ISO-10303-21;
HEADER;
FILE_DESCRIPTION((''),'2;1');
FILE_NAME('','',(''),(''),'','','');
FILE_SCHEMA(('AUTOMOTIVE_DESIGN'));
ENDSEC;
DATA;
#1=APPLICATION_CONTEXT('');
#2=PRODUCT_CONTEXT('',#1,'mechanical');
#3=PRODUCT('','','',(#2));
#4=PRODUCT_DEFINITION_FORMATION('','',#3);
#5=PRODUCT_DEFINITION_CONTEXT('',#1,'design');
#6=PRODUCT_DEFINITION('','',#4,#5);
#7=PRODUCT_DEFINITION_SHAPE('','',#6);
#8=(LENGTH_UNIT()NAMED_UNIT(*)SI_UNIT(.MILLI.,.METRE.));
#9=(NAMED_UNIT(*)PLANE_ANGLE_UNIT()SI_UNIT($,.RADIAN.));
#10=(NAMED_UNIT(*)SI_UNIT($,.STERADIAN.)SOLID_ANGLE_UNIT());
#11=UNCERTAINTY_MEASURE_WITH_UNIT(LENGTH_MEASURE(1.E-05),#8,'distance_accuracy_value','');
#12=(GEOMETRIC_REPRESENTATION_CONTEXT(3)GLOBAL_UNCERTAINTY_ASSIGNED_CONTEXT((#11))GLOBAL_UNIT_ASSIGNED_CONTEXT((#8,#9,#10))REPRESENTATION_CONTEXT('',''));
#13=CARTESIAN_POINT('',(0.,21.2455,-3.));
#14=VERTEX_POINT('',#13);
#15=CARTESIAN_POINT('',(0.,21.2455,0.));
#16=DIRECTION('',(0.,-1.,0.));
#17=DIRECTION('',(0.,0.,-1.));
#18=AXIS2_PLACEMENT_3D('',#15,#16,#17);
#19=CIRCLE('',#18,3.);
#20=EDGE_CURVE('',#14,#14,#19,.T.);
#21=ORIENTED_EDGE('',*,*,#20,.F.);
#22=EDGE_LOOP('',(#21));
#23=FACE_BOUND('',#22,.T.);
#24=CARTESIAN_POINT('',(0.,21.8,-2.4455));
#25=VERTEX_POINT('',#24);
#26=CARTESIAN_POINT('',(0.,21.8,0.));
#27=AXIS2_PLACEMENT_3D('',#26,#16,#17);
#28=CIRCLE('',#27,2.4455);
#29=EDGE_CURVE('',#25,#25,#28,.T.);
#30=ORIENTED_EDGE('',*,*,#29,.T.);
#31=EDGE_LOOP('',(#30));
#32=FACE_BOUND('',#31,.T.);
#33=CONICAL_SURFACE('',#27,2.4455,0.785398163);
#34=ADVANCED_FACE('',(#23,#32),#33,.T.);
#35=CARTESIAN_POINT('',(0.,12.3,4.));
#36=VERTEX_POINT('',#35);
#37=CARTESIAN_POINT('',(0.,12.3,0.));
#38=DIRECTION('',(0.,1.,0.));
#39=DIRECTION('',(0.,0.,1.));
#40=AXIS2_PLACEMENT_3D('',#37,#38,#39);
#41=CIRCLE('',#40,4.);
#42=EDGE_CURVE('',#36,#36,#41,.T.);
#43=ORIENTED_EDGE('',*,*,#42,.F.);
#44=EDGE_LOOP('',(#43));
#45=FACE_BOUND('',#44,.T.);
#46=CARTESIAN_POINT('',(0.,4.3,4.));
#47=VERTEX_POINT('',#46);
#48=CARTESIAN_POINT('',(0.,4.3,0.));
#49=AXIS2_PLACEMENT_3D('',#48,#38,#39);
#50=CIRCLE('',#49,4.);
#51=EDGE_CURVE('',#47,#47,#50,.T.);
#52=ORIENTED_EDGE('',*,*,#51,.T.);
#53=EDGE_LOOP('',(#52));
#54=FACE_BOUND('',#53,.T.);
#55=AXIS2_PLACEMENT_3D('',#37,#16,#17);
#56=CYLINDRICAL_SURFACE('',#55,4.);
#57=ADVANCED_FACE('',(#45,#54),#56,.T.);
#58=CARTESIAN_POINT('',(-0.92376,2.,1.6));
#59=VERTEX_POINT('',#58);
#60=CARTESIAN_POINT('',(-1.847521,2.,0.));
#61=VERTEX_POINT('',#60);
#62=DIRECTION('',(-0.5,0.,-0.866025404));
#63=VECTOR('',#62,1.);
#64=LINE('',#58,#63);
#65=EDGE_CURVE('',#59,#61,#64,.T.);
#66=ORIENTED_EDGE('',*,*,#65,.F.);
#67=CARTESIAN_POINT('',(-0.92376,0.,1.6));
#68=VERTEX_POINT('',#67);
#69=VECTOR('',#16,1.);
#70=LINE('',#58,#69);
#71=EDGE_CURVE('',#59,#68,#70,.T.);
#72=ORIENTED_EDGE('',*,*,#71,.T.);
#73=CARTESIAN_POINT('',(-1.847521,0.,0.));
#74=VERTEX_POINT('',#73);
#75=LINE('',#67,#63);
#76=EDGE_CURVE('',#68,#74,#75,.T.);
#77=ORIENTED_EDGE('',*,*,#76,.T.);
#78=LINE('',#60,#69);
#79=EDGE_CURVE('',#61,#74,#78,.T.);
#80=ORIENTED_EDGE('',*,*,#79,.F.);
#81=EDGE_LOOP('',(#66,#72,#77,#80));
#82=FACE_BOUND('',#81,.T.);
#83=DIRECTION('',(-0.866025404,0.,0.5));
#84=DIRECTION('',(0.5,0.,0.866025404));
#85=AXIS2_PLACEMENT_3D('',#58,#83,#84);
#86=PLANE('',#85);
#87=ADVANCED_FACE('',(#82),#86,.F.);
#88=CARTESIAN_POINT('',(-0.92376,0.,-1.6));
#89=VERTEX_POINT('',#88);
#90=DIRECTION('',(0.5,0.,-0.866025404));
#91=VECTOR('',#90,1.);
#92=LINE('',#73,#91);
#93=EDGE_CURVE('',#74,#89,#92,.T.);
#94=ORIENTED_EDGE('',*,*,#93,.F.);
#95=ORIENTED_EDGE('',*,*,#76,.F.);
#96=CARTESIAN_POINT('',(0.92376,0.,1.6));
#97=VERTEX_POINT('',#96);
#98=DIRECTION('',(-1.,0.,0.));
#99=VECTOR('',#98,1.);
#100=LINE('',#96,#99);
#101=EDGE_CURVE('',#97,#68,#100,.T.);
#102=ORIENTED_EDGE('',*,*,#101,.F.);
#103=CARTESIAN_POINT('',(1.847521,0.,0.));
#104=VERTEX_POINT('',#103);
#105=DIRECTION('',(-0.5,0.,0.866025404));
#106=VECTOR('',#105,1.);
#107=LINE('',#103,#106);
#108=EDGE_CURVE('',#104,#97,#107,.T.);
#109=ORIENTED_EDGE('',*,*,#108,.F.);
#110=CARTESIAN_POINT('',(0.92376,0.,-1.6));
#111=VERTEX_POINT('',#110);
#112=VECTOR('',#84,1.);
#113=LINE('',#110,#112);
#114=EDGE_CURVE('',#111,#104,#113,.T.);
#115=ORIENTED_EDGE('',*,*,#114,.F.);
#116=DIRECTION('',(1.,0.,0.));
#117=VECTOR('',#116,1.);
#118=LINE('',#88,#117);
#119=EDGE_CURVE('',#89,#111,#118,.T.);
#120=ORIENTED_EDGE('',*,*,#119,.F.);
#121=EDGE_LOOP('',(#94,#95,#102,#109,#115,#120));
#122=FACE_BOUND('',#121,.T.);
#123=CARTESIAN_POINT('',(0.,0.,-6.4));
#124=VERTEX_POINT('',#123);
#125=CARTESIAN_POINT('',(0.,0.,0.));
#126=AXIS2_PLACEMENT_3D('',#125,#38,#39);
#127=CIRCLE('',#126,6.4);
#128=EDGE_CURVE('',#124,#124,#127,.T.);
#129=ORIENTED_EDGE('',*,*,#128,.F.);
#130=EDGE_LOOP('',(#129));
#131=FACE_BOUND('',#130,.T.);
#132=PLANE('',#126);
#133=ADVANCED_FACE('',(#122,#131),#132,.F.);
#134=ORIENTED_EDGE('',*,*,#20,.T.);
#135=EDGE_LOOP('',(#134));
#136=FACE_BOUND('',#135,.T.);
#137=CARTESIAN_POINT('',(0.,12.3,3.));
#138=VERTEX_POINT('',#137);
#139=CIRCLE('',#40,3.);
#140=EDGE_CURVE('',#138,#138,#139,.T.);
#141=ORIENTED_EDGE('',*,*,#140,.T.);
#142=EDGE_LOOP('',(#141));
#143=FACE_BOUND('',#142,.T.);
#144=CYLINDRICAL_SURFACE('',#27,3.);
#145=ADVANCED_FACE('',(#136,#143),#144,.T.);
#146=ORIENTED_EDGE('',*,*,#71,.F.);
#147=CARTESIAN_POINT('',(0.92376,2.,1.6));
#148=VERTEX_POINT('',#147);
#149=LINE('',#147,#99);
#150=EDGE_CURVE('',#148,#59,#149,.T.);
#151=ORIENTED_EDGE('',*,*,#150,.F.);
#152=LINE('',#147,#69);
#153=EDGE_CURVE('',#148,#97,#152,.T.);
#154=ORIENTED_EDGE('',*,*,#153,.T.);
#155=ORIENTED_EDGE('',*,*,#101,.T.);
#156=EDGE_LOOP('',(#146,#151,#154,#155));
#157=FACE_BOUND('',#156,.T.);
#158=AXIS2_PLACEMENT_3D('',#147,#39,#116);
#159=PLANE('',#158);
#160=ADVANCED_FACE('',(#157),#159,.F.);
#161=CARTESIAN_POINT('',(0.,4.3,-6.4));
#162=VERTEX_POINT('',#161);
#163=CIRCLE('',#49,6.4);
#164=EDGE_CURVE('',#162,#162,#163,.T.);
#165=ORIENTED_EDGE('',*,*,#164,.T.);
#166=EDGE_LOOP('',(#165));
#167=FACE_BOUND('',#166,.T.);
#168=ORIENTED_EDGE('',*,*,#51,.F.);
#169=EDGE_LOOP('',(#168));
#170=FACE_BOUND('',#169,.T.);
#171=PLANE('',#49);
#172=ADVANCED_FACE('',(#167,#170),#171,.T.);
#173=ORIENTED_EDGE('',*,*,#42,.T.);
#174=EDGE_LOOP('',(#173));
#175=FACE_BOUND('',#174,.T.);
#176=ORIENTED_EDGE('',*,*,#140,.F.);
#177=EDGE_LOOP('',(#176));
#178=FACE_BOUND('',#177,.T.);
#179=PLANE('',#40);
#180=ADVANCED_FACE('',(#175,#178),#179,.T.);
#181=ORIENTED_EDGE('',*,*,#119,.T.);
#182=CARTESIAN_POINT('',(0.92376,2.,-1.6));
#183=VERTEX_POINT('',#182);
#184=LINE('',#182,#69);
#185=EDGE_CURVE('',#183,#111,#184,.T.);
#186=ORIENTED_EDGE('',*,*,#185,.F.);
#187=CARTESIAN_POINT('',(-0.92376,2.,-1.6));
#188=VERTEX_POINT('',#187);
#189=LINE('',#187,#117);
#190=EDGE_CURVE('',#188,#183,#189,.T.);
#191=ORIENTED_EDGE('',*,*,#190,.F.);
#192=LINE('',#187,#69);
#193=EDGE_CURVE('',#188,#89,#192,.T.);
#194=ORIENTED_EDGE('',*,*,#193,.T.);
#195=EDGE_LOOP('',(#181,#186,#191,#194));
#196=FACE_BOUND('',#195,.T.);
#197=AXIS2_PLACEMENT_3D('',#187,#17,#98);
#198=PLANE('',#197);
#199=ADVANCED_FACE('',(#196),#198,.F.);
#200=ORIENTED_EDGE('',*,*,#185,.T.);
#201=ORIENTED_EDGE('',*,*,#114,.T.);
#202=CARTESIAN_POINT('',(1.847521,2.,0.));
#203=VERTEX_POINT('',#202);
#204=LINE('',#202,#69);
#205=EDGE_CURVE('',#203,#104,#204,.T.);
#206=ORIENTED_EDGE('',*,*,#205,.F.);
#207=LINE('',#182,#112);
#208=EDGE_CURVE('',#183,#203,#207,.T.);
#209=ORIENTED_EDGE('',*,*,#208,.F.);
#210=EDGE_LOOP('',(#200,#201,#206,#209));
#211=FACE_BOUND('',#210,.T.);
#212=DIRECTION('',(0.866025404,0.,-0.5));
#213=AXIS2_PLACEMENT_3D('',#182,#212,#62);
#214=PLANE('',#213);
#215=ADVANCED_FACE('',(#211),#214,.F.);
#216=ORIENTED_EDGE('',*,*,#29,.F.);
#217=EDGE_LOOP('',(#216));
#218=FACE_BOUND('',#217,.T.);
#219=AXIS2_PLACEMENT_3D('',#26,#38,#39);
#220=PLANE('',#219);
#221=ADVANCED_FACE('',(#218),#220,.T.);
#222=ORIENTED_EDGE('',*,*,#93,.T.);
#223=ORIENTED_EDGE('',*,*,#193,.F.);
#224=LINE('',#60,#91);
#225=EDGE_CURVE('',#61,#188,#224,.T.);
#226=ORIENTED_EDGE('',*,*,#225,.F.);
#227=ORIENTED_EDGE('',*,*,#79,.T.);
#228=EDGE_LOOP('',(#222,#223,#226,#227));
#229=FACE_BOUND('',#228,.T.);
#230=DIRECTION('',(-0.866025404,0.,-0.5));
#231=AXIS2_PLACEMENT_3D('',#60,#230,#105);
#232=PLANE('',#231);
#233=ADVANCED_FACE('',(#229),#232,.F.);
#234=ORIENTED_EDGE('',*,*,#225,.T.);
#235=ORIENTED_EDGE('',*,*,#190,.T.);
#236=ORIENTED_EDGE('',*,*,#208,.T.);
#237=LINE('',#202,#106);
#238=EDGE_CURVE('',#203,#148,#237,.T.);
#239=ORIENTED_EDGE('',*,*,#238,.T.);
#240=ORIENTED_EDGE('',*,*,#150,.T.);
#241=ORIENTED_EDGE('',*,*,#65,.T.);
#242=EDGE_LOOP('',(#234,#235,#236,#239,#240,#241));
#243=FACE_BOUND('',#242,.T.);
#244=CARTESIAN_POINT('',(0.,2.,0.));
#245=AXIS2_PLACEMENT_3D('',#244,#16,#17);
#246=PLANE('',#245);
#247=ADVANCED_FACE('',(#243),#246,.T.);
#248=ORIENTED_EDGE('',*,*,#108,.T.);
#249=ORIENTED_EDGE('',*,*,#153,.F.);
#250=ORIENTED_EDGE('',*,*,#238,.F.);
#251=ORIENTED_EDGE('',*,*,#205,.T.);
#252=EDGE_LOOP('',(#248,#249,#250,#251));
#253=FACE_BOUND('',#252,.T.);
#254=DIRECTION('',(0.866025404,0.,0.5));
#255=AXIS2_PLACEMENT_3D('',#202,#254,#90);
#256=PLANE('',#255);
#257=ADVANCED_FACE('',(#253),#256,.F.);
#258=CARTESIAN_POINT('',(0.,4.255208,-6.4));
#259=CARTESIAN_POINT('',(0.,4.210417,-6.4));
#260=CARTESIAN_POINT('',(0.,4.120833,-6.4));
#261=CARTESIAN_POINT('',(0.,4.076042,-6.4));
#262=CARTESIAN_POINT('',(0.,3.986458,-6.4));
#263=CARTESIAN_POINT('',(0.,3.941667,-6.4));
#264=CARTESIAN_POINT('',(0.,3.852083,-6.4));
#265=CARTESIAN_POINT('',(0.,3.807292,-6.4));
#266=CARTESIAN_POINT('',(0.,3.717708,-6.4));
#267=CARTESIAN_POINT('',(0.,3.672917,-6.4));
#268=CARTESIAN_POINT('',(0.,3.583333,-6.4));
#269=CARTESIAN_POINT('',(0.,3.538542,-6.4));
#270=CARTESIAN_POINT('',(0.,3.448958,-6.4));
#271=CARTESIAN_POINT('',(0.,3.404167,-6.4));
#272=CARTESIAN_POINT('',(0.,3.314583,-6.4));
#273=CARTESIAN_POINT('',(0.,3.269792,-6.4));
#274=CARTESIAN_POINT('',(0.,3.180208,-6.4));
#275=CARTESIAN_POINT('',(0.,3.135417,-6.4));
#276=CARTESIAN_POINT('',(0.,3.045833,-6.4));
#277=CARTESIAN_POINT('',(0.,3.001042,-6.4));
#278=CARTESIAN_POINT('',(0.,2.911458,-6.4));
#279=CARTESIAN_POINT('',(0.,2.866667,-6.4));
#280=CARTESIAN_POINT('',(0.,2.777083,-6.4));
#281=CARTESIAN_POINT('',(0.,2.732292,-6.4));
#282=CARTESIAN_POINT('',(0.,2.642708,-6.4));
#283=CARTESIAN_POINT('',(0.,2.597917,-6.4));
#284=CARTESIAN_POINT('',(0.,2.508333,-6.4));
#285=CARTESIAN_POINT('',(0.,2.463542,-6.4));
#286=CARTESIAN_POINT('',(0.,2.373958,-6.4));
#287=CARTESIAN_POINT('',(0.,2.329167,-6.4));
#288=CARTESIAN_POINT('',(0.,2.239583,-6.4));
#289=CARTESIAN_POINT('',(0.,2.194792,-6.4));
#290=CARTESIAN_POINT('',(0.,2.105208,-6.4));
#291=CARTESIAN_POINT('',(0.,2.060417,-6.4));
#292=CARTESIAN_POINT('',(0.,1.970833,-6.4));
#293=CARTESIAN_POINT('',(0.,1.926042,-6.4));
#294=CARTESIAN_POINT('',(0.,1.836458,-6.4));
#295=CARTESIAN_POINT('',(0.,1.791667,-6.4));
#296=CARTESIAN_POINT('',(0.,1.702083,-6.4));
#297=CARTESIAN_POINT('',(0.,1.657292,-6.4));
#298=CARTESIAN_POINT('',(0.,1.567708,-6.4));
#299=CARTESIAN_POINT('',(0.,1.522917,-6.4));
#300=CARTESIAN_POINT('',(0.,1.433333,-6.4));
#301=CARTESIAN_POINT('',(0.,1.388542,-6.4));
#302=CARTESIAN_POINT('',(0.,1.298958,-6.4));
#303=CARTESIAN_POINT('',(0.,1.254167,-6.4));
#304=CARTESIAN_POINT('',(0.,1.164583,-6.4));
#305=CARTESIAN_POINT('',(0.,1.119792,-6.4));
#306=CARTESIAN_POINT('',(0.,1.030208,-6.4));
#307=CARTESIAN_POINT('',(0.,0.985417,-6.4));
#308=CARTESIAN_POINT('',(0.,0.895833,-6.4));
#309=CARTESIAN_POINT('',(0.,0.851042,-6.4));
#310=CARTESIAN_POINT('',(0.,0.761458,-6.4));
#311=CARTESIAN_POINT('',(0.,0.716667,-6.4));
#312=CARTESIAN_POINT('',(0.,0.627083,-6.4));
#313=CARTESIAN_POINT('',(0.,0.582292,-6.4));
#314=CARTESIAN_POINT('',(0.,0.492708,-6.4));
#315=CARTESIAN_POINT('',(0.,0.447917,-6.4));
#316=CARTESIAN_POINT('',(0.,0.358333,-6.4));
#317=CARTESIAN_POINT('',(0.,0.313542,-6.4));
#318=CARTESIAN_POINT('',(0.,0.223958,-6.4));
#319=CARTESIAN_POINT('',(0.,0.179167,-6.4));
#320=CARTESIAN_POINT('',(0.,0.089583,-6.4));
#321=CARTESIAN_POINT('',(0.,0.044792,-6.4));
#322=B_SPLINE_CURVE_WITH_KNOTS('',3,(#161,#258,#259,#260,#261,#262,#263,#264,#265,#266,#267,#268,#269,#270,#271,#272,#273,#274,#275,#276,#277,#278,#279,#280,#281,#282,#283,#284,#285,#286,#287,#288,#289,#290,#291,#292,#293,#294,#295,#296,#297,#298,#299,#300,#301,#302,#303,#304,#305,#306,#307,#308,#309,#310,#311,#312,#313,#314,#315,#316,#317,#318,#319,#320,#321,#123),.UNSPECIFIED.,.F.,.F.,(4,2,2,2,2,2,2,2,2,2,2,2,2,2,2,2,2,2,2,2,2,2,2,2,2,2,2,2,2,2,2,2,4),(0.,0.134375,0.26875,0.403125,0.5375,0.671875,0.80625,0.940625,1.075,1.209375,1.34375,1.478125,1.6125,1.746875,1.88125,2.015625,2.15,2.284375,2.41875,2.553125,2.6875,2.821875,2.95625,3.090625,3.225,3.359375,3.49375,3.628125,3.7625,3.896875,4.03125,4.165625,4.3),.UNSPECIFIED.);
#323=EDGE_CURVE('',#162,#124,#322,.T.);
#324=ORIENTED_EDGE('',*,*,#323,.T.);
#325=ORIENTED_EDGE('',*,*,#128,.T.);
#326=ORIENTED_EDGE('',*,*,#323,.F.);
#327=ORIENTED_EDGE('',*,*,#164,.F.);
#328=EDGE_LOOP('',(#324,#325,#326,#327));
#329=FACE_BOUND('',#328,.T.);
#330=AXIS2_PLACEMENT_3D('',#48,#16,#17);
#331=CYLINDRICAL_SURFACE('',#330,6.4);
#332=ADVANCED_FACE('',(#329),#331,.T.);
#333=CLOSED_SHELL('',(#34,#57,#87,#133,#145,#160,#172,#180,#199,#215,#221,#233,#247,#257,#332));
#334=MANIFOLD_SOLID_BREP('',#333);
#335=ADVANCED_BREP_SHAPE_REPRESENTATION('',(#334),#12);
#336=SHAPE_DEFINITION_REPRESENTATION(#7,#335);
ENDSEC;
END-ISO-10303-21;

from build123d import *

# Parameters (mm, degrees)
SKETCH_1_R          = 6.4
EXTRUDE_1_DEPTH     = 4.3
SKETCH_2_R          = 4
EXTRUDE_2_DEPTH     = 8
SKETCH_3_R          = 3
EXTRUDE_3_DEPTH     = 9.5
CUT_EXTRUDE_1_DEPTH = 2


# Read off the part's stored shape, not the designer's step: M6x1.0 机械螺纹 螺柱1
with BuildPart() as part:
    # 草图1 → 凸台-拉伸1 (new body)
    with BuildSketch(Plane(origin=(0, 0, 0), x_dir=(1, 0, 0), z_dir=(0, 1, 0))):
        with Locations(Location((0, 0, 0), (0, 0, 90))):
            Circle(SKETCH_1_R)
    extrude(amount=EXTRUDE_1_DEPTH)

    # 草图2 → 凸台-拉伸2 (add)
    with BuildSketch(Plane(origin=(0, 4.3, 0), x_dir=(1, 0, 0), z_dir=(0, 1, 0))):
        with Locations(Location((0, 0, 0), (0, 0, 270))):
            Circle(SKETCH_2_R)
    extrude(amount=EXTRUDE_2_DEPTH)

    # 草图3 → 凸台-拉伸3 (add)
    with BuildSketch(Plane(origin=(0, 12.3, 0), x_dir=(1, 0, 0), z_dir=(0, 1, 0))):
        with Locations(Location((0, 0, 0), (0, 0, 270))):
            Circle(SKETCH_3_R)
    extrude(amount=EXTRUDE_3_DEPTH)

    # M6x1.0 机械螺纹 螺柱1 outline → M6x1.0 机械螺纹 螺柱1 (revolve, cut)
    with BuildSketch(Plane.XY):
        Polygon((3, 21.8), (2.4455, 21.8), (3, 21.2455), align=None)
    revolve(axis=Axis((0, 0, 0), (0, 1, 0)), mode=Mode.SUBTRACT)

    # 草图5 → 切除-拉伸1 (cut)
    with BuildSketch(Plane.XZ):
        Polygon((1.847520861, 0), (0.923760431, 1.6), (-0.923760431, 1.6), (-1.847520861, 0), (-0.923760431, -1.6), (0.923760431, -1.6), align=None)
    extrude(amount=-CUT_EXTRUDE_1_DEPTH, mode=Mode.SUBTRACT)


solid = part.part
